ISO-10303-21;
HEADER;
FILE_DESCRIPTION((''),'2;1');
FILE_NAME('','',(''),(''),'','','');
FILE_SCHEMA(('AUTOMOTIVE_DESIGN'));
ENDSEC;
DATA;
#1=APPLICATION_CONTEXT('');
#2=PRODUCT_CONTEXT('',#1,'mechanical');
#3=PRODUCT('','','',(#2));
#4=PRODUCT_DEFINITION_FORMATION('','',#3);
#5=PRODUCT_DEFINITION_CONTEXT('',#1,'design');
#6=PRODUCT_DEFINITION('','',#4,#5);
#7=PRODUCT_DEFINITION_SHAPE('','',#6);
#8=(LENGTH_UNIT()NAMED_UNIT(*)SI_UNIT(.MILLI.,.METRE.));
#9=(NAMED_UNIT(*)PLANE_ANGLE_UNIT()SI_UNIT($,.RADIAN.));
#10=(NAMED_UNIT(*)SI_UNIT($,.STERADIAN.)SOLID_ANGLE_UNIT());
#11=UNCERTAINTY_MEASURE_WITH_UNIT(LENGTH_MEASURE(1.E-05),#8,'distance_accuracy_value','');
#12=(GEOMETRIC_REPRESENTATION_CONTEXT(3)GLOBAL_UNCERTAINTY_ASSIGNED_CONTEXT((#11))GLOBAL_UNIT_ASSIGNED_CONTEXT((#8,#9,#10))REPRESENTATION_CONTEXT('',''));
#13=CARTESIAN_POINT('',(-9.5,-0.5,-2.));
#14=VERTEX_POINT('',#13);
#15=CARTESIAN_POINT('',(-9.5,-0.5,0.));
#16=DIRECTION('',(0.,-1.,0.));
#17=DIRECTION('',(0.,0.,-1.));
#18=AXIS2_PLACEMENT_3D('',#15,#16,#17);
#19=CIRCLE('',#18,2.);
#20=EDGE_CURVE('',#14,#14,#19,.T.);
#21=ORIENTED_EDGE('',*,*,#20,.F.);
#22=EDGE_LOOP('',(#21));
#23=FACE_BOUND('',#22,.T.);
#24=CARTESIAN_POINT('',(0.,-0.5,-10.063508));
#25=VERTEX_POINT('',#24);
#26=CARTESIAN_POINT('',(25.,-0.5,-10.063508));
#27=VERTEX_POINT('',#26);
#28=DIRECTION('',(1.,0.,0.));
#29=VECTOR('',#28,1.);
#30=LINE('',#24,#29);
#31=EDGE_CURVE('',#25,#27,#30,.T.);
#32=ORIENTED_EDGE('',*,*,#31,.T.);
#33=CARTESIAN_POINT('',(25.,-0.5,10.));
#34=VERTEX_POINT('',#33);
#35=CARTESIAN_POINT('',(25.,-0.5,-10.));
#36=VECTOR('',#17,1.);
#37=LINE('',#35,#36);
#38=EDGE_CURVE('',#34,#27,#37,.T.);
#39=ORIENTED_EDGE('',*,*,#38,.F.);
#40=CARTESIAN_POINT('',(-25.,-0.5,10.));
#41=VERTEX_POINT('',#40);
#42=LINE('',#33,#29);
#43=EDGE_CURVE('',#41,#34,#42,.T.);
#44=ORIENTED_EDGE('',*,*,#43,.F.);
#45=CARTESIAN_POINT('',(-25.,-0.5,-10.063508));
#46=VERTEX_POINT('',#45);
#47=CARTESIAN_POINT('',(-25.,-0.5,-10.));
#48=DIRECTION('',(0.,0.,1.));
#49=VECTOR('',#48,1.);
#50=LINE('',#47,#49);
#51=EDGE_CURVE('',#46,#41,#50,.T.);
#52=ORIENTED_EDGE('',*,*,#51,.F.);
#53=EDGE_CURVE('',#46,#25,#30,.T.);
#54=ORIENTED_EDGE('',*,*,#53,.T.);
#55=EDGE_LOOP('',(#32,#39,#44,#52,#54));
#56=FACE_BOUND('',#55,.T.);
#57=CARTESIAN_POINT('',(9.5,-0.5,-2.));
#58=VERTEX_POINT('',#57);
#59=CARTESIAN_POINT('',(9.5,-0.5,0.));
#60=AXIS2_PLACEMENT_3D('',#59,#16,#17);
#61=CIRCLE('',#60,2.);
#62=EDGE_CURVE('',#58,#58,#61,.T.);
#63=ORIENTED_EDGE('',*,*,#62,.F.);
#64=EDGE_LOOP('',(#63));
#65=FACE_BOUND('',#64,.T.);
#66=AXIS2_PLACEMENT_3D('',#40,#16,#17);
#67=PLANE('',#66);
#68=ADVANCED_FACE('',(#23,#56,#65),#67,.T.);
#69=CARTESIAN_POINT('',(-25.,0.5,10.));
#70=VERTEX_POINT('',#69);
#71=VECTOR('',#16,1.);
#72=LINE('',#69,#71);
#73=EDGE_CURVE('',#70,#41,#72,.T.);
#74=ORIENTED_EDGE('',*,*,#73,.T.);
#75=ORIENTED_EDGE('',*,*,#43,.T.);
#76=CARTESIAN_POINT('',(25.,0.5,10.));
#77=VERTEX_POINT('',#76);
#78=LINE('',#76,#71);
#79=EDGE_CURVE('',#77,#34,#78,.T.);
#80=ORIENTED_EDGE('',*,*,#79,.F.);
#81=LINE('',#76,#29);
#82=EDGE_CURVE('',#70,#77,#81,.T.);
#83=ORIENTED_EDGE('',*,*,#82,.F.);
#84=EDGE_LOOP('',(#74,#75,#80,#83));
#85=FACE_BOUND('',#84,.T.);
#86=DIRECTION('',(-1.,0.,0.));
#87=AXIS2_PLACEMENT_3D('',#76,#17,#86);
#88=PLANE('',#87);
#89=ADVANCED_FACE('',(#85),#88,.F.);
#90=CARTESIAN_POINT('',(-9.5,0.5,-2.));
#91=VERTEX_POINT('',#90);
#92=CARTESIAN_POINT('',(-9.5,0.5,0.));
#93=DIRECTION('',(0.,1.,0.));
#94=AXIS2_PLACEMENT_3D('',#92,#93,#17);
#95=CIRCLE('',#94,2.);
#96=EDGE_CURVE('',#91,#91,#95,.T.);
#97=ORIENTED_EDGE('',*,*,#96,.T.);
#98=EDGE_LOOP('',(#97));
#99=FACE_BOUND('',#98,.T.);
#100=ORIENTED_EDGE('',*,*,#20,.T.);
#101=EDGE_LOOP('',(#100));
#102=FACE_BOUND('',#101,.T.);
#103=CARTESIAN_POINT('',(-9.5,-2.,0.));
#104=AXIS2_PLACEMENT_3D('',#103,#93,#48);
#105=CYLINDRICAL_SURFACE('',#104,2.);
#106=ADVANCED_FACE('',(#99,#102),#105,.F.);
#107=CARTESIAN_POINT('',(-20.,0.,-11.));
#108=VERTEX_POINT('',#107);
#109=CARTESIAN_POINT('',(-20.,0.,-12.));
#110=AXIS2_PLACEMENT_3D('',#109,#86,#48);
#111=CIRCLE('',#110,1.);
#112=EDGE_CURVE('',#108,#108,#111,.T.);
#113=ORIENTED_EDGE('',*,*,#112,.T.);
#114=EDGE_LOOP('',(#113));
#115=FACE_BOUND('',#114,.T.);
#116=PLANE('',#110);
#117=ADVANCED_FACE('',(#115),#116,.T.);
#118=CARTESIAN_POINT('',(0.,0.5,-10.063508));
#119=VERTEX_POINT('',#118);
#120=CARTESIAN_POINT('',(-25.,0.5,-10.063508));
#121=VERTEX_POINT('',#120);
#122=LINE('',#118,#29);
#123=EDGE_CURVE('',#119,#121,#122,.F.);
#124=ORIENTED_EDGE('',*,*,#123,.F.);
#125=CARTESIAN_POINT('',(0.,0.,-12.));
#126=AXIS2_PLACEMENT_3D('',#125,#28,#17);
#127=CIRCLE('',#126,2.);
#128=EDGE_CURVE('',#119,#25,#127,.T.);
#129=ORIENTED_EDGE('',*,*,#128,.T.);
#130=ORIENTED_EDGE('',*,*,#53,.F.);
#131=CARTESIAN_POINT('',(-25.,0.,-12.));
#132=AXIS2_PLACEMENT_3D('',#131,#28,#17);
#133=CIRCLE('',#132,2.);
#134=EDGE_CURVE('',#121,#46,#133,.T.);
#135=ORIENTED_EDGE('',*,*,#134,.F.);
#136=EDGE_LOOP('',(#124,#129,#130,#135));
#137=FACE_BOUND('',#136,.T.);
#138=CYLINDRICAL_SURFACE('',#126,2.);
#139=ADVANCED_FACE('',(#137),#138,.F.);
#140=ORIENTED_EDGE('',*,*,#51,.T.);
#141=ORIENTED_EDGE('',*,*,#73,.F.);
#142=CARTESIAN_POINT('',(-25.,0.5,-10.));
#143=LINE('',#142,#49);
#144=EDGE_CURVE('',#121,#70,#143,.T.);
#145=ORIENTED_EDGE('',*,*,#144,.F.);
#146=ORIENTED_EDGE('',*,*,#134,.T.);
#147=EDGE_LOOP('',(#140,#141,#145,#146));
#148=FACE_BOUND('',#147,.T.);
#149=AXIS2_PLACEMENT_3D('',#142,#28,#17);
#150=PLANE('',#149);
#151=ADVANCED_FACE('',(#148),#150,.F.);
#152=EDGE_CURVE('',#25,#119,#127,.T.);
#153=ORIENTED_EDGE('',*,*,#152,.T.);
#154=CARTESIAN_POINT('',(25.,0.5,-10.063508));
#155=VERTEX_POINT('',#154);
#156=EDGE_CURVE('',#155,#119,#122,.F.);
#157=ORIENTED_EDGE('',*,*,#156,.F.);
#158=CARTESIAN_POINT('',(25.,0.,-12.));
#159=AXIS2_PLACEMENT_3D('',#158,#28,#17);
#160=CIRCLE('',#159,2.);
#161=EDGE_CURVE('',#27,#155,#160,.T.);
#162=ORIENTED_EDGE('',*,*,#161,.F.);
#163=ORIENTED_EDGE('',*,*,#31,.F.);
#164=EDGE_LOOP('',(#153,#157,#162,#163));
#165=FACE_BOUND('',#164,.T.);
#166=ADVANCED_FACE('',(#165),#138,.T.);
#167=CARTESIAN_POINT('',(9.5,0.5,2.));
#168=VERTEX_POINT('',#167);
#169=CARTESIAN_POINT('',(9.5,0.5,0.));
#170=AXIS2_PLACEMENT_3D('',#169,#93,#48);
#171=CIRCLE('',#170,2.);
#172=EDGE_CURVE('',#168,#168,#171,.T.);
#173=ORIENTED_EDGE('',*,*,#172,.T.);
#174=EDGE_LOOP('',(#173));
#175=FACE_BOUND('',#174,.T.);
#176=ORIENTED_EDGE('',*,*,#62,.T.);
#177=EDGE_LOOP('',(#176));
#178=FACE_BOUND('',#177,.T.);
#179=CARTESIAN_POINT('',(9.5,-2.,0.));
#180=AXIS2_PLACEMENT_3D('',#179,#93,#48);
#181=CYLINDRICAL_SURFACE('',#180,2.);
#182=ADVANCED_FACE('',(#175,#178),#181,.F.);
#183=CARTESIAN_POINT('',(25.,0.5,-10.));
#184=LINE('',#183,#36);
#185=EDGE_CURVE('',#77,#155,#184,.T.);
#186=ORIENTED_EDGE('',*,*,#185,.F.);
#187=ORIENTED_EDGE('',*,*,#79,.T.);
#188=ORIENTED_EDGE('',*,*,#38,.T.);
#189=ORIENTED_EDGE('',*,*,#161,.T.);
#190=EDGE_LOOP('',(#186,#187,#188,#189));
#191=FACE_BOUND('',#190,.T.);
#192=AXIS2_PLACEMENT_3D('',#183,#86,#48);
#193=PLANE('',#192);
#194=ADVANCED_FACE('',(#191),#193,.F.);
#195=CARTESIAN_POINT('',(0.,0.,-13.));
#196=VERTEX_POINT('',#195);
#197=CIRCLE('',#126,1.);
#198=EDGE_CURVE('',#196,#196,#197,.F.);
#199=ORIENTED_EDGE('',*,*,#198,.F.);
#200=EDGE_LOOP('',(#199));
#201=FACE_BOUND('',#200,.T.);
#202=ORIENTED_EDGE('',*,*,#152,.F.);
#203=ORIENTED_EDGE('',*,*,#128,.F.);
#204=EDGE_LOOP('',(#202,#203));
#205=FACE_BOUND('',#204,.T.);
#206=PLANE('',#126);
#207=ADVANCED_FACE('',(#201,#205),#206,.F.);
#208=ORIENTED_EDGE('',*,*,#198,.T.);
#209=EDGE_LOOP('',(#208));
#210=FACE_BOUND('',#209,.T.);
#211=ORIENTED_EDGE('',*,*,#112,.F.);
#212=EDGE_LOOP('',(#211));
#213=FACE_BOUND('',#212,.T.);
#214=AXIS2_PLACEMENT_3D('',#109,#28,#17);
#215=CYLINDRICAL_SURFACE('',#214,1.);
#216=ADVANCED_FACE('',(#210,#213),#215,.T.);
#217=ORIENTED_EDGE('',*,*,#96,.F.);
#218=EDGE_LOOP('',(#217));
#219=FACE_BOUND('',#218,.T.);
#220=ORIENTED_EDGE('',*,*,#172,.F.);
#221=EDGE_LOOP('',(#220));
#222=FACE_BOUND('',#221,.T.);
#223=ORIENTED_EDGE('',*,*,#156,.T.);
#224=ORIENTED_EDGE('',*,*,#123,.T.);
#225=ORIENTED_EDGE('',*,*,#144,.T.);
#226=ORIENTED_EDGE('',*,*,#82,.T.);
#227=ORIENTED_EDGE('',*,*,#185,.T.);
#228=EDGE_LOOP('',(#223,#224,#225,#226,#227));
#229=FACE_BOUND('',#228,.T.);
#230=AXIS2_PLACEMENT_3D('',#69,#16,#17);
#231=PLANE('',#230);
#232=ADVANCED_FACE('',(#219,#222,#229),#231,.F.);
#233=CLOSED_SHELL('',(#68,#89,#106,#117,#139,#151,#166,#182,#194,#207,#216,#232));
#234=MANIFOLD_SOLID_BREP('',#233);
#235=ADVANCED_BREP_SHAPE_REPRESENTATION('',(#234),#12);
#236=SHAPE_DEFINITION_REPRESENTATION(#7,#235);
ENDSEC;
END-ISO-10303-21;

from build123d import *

# Parameters (mm, degrees)
SKETCH1_W                = 50
SKETCH1_H                = 20
BOSS_EXTRUDE1_DEPTH      = 0.5
SKETCH2_R                = 2
BOSS_EXTRUDE2_DEPTH      = 25
SKETCH3_R                = 1
BOSS_EXTRUDE3_DEPTH      = 20
BOSS_EXTRUDE4_REACH      = 34.078
BOSS_EXTRUDE4_END_RADIUS = 2
SKETCH4_W                = 50
SKETCH4_H                = 1
SKETCH5_R                = 2
CUT_EXTRUDE1_DEPTH       = 29.761954037


with BuildPart() as part:
    # Sketch1 → Boss-Extrude1 (new, symmetric)
    with BuildSketch(Plane(origin=(0, 0, 0), x_dir=(1, 0, 0), z_dir=(0, 1, 0))):
        Rectangle(SKETCH1_W, SKETCH1_H)
    extrude(amount=BOSS_EXTRUDE1_DEPTH, both=True)



with BuildPart() as body_2:
    # Sketch2 → Boss-Extrude2 (new body)
    with BuildSketch(Plane(origin=(25, 0, 0), x_dir=(0, 0, -1), z_dir=(1, 0, 0))):
        with Locations((12, 0)):
            Circle(SKETCH2_R)
    extrude(amount=-BOSS_EXTRUDE2_DEPTH)

    # Sketch3 → Boss-Extrude3 (add)
    with BuildSketch(Plane.ZY):
        with Locations((-12, 0)):
            Circle(SKETCH3_R)
    extrude(amount=BOSS_EXTRUDE3_DEPTH)


with BuildPart() as part_1:
    add(part.part)

    add(body_2.part)  # Boss-Extrude4 merges body 2
    # Boss-Extrude4: up to this cylinder (the profile starts outside it)
    boss_extrude4_end = Plane(origin=(0, 0, -12), z_dir=(1, 0, 0)) * Cylinder(BOSS_EXTRUDE4_END_RADIUS, 73.156, mode=Mode.PRIVATE)
    # Sketch4 → Boss-Extrude4 (add, up to the surface)
    with BuildSketch(Plane(origin=(0, 0, -10), x_dir=(-1, 0, 0), z_dir=(0, 0, -1)), mode=Mode.PRIVATE) as boss_extrude4_sk1:
        Rectangle(SKETCH4_W, SKETCH4_H)
    boss_extrude4_tool1 = extrude(boss_extrude4_sk1.sketch, amount=BOSS_EXTRUDE4_REACH, mode=Mode.PRIVATE) - boss_extrude4_end
    add(boss_extrude4_tool1.solids().sort_by_distance((0, 0, -10))[0])
    add(boss_extrude4_tool1.solids().sort_by_distance((0, 0, -10))[1])

    # Sketch5 → Cut-Extrude1 (cut, through all)
    with BuildSketch(Plane(origin=(0, 0.5, 0), x_dir=(1, 0, 0), z_dir=(0, 1, 0))):
        with Locations((9.5, 0)):
            Circle(SKETCH5_R)
        with Locations((-9.5, 0)):
            Circle(SKETCH5_R)
    extrude(amount=-CUT_EXTRUDE1_DEPTH, mode=Mode.SUBTRACT)


solid = part_1.part
